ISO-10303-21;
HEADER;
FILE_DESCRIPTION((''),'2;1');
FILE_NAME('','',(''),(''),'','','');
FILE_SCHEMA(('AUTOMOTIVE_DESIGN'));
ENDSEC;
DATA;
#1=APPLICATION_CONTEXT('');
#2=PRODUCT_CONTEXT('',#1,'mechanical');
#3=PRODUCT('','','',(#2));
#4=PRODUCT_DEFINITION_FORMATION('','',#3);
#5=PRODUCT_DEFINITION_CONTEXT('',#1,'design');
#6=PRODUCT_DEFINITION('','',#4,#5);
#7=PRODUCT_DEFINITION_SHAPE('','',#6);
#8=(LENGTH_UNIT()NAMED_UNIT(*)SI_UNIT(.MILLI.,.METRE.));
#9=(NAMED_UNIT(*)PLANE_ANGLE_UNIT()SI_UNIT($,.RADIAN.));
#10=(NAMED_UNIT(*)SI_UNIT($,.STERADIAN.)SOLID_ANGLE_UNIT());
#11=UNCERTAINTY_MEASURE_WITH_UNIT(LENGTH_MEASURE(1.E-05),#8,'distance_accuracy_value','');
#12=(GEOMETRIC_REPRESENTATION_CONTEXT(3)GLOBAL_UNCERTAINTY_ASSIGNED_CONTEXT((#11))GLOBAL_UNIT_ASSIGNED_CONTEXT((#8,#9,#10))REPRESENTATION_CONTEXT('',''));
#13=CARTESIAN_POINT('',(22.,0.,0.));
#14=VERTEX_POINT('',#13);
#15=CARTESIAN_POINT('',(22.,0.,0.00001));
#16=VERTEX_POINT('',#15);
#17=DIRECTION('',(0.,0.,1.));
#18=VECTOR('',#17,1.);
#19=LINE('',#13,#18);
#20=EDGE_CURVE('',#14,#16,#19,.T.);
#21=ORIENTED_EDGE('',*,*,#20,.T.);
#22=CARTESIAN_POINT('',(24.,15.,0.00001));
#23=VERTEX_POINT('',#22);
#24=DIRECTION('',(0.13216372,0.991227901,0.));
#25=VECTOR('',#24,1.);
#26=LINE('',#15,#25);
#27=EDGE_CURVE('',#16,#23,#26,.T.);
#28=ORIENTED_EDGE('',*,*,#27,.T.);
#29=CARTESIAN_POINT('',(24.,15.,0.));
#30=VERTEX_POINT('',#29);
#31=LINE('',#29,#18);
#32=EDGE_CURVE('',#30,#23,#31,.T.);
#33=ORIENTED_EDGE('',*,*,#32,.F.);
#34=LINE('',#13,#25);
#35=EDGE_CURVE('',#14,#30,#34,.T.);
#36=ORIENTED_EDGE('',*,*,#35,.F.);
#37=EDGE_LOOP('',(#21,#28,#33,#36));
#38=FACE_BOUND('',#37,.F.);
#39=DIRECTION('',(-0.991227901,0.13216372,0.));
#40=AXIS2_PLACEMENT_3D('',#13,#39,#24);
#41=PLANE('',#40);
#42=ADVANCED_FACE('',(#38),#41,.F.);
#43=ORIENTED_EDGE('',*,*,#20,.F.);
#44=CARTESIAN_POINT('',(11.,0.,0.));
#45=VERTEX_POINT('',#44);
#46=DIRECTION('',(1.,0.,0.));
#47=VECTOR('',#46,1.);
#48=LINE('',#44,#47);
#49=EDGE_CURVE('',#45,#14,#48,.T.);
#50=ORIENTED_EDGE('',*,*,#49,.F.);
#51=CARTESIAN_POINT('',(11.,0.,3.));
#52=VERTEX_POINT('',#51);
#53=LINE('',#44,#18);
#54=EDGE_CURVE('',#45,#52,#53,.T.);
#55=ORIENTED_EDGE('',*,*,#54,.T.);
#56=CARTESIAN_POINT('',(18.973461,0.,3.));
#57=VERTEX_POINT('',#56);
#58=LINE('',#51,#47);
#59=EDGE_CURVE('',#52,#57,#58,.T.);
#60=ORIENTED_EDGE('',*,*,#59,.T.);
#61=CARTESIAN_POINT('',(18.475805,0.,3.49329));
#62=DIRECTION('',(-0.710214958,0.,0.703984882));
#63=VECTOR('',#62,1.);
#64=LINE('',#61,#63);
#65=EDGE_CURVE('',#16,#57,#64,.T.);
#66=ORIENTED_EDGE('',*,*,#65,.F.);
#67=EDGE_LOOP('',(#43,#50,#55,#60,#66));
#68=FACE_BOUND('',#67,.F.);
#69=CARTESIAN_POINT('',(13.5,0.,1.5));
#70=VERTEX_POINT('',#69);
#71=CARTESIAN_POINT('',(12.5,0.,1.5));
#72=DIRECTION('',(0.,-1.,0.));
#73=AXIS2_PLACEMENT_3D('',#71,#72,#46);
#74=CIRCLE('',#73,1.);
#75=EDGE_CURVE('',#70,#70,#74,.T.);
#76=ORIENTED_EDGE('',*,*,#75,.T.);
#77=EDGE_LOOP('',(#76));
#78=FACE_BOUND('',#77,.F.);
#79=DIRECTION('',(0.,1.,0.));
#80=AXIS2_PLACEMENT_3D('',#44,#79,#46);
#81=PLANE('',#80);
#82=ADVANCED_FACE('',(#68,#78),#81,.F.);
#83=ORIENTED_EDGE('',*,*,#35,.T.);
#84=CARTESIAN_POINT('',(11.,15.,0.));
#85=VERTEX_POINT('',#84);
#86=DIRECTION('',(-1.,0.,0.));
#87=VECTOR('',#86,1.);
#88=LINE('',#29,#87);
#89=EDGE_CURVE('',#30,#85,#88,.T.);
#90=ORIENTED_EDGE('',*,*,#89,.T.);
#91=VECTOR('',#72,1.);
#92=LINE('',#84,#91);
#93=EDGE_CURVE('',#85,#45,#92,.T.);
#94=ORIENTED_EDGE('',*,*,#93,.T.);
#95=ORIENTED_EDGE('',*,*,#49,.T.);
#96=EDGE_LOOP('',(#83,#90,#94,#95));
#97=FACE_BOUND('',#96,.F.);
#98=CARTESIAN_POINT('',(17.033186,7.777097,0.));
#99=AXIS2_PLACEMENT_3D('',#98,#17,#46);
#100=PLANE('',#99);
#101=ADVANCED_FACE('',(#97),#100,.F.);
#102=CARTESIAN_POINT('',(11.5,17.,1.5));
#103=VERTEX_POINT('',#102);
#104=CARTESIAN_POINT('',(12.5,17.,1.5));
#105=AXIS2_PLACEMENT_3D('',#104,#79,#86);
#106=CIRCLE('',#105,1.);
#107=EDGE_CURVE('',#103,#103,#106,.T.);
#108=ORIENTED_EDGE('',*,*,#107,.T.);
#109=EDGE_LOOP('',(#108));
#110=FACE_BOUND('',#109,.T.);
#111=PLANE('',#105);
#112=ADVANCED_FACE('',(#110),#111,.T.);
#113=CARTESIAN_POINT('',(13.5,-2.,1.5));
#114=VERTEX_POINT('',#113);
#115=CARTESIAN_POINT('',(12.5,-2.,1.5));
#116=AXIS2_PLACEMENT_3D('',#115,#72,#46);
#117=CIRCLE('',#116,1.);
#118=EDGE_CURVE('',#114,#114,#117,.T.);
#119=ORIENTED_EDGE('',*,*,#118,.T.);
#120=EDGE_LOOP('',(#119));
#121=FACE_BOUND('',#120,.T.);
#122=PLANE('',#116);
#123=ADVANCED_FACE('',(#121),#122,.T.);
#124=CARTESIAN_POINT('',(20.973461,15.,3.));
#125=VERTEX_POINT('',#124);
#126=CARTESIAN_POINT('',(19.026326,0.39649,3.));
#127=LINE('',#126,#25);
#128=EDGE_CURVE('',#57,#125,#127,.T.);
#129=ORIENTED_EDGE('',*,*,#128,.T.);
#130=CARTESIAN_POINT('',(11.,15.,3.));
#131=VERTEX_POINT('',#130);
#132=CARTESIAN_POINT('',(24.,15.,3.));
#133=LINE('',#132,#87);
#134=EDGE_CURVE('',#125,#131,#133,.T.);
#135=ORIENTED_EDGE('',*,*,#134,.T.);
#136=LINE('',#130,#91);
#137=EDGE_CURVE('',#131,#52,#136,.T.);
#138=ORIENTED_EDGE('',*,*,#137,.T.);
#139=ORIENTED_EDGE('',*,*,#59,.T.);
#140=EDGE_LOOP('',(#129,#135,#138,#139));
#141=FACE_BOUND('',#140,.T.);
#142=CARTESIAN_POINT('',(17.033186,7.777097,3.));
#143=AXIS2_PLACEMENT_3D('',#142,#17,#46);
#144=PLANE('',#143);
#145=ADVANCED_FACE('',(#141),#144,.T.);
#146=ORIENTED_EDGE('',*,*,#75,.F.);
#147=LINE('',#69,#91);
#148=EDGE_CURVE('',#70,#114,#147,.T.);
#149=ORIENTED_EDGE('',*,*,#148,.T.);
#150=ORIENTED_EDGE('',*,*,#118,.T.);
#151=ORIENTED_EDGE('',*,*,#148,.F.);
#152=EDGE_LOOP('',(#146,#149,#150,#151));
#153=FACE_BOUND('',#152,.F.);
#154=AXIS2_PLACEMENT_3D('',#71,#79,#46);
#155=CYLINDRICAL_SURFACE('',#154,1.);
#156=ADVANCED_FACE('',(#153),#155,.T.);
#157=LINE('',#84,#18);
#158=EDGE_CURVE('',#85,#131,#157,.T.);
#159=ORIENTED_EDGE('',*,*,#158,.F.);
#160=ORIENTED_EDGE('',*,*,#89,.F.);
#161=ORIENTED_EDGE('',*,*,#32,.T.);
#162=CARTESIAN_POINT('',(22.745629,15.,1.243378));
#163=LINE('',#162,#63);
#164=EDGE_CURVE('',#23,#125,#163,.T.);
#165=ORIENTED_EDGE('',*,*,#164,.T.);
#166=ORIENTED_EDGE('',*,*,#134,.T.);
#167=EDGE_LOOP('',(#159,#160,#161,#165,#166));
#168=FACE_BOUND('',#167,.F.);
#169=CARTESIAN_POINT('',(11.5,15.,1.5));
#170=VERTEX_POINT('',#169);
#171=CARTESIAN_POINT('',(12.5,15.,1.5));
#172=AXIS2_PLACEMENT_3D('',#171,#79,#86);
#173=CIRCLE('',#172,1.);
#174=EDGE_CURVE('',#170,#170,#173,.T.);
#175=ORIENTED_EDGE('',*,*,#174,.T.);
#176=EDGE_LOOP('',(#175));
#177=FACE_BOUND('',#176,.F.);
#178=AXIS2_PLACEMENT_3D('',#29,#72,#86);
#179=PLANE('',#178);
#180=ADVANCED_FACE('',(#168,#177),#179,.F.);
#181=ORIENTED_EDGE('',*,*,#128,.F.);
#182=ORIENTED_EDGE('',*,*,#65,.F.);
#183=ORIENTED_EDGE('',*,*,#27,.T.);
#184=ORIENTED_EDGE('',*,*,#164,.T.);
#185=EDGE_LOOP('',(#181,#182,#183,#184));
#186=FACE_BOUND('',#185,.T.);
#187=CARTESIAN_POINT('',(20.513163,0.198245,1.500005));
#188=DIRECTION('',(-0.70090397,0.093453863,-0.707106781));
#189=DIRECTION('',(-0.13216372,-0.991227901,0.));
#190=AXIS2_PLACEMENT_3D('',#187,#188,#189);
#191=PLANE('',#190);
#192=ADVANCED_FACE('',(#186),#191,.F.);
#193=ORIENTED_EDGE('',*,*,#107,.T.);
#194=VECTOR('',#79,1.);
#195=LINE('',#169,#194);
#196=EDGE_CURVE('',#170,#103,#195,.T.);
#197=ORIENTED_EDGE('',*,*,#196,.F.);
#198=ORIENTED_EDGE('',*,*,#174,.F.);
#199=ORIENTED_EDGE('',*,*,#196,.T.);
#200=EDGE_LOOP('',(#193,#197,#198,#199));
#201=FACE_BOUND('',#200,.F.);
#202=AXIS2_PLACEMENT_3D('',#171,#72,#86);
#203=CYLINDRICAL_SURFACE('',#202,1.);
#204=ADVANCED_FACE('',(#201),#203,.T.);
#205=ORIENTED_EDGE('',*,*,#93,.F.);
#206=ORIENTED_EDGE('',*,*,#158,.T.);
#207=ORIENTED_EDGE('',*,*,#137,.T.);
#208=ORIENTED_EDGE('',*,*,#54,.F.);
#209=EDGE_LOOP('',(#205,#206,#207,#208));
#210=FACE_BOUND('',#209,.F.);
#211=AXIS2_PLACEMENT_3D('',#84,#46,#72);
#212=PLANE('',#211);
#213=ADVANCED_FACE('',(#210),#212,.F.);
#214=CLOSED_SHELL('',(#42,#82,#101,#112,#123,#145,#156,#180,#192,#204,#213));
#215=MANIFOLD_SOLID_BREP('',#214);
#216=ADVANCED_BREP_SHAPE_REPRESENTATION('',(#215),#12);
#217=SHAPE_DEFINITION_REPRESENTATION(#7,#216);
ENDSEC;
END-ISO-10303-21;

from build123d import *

# Parameters (mm, degrees)
F1_DEPTH = 3
F2_SIZE2 = 2.99999
F2_SIZE  = 2.99999
F3_R     = 1
F4_DEPTH = 2
F5_R     = 1
F6_DEPTH = 2


# Not quite as in the source:
# - a fillet or chamfer is up to 0.001 mm smaller than in the source, because OpenCascade refuses the exact size


with BuildPart() as f1:
    # F0 (on Top) → F1 (new body)
    with BuildSketch(Plane.XY):
        Polygon((11, 3), (11, 0), (22, 0), (24, 15), (11, 15), (11, 12), align=None)
    extrude(amount=F1_DEPTH)

    # F2 (size 3 and 3 in the source; OpenCascade refuses exactly that, so slightly less here)
    f2_edges = [f1.edges().sort_by_distance(p)[0] for p in [
        (23, 7.5, 3),
    ]]
    chamfer(f2_edges, length=F2_SIZE, length2=F2_SIZE2)

    # F3 (on face) → F4 (join)
    with BuildSketch(Plane.XZ):
        with Locations((12.5, 1.5)):
            Circle(F3_R)
    extrude(amount=F4_DEPTH)

    # F5 (on face) → F6 (join)
    with BuildSketch(Plane(origin=(0, 15, 0), x_dir=(-1, 0, 0), z_dir=(0, 1, 0))):
        with Locations((-12.5, 1.5)):
            Circle(F5_R)
    extrude(amount=F6_DEPTH)


solid = f1.part
